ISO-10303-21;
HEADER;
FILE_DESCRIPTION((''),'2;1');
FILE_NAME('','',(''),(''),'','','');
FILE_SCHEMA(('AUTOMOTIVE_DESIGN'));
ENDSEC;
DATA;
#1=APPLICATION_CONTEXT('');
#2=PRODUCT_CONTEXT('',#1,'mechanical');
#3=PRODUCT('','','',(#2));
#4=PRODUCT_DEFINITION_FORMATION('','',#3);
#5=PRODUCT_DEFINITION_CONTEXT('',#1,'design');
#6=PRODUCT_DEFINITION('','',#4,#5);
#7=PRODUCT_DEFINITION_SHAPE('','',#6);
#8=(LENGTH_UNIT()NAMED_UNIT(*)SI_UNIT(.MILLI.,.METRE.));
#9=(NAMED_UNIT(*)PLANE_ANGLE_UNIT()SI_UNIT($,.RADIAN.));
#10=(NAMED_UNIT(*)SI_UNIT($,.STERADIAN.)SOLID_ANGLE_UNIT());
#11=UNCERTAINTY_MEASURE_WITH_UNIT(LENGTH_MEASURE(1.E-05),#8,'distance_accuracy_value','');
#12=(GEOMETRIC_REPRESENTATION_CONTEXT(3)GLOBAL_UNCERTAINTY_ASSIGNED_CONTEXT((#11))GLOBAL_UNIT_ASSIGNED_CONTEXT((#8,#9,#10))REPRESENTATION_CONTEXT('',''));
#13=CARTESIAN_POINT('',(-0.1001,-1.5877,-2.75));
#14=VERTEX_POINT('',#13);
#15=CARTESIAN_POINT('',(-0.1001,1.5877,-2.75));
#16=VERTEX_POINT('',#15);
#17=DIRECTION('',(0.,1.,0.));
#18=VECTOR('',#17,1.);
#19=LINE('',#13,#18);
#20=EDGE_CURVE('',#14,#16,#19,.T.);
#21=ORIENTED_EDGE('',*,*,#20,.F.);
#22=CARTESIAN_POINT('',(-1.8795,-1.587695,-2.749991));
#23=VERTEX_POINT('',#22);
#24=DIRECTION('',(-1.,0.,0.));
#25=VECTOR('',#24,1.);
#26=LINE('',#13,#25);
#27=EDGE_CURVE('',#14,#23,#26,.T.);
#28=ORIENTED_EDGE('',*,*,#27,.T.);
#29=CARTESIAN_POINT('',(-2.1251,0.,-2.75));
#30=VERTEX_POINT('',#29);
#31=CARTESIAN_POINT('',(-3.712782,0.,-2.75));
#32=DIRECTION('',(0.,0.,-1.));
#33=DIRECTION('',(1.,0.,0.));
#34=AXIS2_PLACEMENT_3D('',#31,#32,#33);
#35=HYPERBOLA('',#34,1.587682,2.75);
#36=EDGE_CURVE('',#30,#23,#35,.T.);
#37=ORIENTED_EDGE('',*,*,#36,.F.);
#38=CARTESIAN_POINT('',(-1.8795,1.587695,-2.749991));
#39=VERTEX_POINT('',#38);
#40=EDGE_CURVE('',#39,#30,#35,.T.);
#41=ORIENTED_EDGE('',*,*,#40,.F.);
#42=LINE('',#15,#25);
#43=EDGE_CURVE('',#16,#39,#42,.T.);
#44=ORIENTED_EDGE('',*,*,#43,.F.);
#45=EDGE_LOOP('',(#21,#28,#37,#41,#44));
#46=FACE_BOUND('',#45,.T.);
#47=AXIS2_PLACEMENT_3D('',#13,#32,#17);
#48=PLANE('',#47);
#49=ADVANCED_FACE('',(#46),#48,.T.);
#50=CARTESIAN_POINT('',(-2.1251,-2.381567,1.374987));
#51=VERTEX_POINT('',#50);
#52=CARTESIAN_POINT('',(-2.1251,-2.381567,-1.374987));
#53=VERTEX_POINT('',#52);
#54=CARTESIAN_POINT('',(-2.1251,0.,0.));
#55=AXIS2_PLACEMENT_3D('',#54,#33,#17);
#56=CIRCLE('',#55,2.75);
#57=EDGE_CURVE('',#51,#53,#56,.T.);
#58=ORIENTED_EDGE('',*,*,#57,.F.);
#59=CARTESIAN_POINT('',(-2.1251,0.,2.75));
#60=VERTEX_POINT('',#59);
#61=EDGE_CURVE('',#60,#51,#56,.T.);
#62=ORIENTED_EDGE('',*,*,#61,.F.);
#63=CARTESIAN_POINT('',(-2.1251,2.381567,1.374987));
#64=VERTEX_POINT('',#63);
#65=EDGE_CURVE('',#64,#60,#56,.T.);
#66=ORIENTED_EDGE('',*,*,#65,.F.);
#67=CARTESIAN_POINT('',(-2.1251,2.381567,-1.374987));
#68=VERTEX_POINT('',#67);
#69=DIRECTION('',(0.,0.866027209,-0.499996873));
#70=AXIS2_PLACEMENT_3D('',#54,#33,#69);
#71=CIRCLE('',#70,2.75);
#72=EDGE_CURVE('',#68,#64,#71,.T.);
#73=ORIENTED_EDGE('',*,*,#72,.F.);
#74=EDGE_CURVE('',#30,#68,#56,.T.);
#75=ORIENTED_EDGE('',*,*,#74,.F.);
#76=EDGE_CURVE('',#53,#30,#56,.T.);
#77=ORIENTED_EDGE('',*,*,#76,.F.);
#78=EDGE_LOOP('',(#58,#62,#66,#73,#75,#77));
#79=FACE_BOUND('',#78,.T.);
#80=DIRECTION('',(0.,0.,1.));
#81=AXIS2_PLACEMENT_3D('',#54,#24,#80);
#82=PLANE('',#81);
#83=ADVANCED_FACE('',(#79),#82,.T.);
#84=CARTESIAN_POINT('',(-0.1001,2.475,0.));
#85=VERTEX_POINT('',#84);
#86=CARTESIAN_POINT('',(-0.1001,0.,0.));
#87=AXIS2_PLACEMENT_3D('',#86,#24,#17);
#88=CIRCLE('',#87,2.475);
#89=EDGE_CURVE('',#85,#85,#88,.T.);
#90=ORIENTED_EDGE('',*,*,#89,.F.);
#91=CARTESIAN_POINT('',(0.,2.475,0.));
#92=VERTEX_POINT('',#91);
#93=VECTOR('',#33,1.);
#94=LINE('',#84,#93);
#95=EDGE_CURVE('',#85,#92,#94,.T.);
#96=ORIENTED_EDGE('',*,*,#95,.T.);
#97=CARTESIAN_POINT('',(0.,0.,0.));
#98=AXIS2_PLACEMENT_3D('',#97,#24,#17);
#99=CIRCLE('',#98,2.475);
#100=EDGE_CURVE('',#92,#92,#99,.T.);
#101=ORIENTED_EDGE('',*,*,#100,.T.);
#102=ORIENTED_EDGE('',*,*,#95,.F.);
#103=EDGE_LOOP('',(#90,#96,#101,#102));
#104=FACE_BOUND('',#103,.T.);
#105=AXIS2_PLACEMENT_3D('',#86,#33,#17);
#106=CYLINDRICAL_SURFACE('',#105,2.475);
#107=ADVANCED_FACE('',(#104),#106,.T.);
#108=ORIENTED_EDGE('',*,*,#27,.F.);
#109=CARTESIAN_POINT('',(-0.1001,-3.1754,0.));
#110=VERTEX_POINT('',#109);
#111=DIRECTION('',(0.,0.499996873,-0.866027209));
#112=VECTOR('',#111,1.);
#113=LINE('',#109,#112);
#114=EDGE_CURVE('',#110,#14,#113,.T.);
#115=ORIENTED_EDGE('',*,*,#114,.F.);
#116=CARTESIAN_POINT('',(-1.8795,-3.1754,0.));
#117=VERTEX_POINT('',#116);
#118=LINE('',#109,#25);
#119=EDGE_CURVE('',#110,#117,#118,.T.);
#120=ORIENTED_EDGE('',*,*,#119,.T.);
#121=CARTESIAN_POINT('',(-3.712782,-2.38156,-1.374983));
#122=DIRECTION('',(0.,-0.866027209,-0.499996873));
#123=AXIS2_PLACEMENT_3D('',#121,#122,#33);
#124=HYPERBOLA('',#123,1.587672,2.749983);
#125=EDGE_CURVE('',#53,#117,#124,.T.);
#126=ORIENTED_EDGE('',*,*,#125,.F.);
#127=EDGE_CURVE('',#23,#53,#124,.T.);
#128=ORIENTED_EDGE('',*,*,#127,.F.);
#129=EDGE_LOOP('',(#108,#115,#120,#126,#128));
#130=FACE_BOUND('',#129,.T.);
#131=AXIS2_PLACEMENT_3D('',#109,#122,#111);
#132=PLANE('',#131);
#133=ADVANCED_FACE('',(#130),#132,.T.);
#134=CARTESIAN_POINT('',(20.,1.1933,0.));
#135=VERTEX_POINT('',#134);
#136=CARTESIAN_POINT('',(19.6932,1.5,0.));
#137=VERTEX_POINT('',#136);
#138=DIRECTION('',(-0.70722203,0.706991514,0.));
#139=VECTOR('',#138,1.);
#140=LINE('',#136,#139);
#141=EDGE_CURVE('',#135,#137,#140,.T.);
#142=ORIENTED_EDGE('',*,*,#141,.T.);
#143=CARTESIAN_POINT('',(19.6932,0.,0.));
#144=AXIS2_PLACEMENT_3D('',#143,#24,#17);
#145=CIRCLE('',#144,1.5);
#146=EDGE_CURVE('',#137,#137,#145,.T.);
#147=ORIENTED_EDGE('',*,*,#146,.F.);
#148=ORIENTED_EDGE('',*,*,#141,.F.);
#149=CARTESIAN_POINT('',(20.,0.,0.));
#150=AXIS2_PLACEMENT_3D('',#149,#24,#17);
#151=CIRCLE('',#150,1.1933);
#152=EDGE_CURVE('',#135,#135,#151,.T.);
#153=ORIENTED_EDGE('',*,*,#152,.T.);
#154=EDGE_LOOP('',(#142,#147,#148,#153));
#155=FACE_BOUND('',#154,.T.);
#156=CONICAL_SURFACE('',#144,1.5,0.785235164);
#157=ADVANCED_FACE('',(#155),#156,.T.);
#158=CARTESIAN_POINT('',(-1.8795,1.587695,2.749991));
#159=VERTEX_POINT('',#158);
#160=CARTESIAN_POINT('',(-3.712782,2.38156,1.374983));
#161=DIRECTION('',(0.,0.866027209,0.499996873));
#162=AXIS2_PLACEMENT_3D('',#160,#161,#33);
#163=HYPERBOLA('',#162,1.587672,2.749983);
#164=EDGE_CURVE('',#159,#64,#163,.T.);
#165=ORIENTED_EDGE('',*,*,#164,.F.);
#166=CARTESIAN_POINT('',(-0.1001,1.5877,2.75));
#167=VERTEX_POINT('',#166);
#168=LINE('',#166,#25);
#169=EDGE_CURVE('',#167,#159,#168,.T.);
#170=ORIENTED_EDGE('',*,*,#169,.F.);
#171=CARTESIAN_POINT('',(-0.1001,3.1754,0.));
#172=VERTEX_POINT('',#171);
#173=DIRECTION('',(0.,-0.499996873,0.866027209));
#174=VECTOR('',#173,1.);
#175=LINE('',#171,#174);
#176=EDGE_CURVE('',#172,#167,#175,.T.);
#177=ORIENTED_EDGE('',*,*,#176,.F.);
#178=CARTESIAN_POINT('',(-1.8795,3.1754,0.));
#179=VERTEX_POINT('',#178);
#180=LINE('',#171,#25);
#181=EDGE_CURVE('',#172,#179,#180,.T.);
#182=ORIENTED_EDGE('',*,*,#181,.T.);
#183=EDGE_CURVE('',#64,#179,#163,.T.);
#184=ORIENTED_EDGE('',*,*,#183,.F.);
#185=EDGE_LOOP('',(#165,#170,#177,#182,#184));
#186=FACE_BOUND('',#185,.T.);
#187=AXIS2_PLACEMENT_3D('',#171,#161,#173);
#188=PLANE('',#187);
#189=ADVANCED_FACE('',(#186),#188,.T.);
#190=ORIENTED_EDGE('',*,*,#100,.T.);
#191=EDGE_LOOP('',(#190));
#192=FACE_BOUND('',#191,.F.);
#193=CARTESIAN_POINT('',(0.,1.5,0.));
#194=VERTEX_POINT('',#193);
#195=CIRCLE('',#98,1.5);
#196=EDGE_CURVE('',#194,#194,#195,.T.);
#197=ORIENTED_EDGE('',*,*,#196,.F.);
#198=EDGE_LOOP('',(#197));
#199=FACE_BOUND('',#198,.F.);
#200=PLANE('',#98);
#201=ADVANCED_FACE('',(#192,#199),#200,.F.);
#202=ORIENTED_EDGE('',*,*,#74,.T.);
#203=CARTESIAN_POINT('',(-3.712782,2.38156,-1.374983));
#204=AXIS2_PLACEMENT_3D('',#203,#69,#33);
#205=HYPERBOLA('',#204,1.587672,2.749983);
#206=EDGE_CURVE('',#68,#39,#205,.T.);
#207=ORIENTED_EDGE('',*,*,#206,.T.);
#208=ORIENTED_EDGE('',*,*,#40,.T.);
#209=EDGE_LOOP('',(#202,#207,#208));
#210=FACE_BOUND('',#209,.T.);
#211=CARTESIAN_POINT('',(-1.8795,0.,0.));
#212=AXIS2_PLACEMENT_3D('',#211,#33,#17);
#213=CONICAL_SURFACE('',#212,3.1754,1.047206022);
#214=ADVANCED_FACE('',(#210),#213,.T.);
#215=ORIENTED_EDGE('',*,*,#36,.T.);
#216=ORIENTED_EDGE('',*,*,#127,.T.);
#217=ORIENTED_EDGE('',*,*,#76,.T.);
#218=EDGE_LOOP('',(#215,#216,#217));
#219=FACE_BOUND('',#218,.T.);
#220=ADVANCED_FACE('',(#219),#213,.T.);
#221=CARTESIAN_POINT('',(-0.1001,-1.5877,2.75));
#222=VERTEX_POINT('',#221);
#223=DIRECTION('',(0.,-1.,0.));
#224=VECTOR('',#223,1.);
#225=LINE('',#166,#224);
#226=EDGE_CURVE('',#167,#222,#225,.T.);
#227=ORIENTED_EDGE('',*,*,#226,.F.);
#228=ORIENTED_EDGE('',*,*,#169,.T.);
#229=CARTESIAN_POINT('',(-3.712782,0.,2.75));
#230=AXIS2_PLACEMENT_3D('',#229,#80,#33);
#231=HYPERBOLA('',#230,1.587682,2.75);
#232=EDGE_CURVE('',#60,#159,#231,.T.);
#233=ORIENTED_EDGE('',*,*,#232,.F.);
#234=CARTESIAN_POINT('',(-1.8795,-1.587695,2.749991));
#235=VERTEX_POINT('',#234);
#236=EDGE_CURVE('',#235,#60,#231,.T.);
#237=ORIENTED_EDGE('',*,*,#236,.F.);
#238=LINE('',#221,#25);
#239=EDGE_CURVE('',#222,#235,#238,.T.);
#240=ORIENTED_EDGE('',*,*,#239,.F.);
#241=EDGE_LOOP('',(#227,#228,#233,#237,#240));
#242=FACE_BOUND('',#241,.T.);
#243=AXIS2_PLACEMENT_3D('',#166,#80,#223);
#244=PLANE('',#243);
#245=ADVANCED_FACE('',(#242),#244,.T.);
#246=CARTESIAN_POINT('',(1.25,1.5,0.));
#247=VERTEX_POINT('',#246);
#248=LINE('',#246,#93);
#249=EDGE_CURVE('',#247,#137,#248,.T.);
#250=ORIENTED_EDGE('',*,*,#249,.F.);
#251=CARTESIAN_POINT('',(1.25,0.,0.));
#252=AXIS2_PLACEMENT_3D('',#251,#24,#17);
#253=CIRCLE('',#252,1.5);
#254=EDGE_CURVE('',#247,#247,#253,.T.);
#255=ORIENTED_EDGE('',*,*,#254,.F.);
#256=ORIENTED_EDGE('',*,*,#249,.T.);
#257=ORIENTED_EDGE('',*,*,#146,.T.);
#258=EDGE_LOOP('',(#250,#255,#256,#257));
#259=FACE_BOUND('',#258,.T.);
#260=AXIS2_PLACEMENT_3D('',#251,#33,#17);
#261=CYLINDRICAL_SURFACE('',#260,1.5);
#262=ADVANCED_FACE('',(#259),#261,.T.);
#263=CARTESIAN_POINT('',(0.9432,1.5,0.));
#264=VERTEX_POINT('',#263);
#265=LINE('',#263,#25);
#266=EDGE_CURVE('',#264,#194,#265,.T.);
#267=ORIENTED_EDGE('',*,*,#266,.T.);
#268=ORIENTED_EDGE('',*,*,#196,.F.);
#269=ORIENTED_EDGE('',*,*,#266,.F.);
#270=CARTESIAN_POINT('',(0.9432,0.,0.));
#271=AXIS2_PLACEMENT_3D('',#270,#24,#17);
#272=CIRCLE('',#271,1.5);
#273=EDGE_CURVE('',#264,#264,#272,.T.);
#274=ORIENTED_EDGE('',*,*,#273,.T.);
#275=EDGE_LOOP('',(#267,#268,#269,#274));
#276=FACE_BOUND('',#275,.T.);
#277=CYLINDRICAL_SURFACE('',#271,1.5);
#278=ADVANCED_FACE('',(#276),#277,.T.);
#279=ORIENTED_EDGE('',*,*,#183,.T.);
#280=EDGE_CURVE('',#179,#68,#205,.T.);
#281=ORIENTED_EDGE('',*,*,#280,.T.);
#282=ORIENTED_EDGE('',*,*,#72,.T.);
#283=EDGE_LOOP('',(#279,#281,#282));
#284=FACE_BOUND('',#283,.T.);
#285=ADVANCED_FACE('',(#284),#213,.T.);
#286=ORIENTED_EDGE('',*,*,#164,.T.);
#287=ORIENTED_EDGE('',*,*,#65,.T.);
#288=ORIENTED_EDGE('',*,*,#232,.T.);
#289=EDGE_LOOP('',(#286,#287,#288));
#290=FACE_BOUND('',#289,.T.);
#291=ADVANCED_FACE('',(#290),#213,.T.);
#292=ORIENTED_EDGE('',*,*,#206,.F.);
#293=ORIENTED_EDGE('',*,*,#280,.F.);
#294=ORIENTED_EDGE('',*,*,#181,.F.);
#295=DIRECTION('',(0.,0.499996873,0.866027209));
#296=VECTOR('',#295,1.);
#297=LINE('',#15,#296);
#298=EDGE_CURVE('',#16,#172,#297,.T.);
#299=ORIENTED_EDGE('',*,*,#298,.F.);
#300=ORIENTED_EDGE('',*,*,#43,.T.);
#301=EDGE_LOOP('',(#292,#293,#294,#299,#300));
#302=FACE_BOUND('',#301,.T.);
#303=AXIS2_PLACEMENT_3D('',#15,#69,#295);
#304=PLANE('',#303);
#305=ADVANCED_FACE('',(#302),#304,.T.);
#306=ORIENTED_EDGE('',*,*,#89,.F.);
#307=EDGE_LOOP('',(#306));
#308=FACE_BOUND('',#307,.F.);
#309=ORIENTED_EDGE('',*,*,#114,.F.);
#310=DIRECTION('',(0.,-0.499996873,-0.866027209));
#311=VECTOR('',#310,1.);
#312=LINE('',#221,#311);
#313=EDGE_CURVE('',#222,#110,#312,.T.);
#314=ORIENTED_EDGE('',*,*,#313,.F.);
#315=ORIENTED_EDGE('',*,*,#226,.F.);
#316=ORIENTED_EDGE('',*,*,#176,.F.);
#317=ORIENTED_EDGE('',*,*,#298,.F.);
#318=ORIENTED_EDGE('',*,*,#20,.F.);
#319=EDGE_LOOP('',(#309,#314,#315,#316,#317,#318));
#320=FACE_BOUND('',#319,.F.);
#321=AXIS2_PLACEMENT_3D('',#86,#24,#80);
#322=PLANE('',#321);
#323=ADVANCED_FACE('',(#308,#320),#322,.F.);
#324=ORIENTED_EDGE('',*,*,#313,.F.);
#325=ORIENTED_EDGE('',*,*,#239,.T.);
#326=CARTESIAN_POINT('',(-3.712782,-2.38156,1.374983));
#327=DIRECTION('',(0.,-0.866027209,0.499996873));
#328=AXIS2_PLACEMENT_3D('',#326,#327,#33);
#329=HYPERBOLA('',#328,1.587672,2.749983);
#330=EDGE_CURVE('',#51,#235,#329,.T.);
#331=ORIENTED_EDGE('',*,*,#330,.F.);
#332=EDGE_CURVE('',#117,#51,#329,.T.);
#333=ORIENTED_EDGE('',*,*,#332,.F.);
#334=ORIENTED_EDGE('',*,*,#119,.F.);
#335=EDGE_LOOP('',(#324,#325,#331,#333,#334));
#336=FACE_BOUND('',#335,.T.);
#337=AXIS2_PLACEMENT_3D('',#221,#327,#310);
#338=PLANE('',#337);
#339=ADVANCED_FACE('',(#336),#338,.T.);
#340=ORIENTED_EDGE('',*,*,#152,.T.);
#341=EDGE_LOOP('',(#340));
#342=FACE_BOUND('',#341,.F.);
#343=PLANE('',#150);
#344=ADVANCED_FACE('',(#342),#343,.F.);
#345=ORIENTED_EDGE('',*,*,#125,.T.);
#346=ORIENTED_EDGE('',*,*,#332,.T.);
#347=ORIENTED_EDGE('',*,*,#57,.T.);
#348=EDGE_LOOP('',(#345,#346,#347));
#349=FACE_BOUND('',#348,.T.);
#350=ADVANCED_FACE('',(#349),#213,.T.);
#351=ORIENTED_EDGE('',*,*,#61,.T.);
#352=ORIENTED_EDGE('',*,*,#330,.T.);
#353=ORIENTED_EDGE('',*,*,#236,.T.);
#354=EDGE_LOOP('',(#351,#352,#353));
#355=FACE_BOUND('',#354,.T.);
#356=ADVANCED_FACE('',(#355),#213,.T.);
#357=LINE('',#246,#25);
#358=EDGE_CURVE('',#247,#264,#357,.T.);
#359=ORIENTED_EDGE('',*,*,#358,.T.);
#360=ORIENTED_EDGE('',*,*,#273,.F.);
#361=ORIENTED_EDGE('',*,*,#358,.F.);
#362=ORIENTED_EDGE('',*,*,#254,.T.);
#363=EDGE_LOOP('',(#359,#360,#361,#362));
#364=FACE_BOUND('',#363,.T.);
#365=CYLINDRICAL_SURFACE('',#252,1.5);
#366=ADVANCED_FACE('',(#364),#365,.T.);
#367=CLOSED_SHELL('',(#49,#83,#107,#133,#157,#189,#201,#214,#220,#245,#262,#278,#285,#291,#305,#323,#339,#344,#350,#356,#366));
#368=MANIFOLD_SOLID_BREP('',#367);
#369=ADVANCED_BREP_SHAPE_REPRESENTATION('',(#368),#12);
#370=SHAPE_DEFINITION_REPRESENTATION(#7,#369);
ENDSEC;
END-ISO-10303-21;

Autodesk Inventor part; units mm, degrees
ref_plane "YZ Plane" through (0, 0, 0) normal (1, 0, 0) x (0, 1, 0)
ref_plane "XZ Plane" through (0, 0, 0) normal (0, 1, 0) x (-1, 0, 0)
sketch "Sketch1" plane through (0, 0, 0) normal (0, 0, 1) x (1, 0, 0)
  line L0 (0, 2.475) -> (0, 1.5)
  line L1 (1.25, 1.5) -> (20, 1.5)
  line L2 (20, 1.5) -> (20, 0)
  line L3 (20, 0) -> (-0.1001, 0)
  line L4 (-4.1201, 0) -> (24.02, 0) projected
  line L5 (-0.1001, 0) -> (-0.1001, 2.475)
  line L6 (-0.1001, 2.475) -> (0, 2.475)
  line L7 (1.25, 1.5) -> (0.9432, 1.5)
  line L8 (0.9432, 1.5) -> (0, 1.5)
  line L9 (0, -0.495) -> (0, 2.97) projected
  dimension "d2" = 3
  dimension "d9" = 0.1001
  dimension "d10" = 4.95
  dimension "d13" = 0.3068
  dimension "d14" = 3
  dimension "d59" = 20
revolve "Body" add sketch "Sketch1" angle 360 about axis through (20, 0, 0) along (-1, 0, 0)
sketch "Sketch2" plane through (-0.1001, 0, 0) normal (-1, 0, 0) x (0, 0, 1)
  line L0 (0, 3.1754) -> (2.75, 1.5877)
  line L1 (2.75, 1.5877) -> (2.75, -1.5877)
  line L2 (2.75, -1.5877) -> (0, -3.1754)
  line L3 (0, -3.1754) -> (-2.75, -1.5877)
  line L4 (-2.75, -1.5877) -> (-2.75, 1.5877)
  line L5 (-2.75, 1.5877) -> (0, 3.1754)
  point P0 (0, 0)
  point P1 (0, 0)
  dimension "d11" = 5.5
extrude "Head" add sketch "Sketch2" along normal blind 2.025
sketch "Sketch4" plane through (0, 0, 0) normal (0, 0, 1) x (1, 0, 0)
  line L0 (-2.1251, 2.75) -> (-2.1251, 3.1754)
  line L1 (-2.1251, 3.1754) -> (-1.8795, 3.1754)
  line L2 (-1.8795, 3.1754) -> (-2.1251, 2.75)
  line L3 (-2.5301, 0) -> (0.3049, 0) projected
  line L4 (-0.1001, 3.1754) -> (-2.1251, 3.1754) projected
  line L5 (-2.1251, 1.5877) -> (-2.1251, 3.1754) projected
  dimension "d5" = 30
  dimension "d19" = 5.5
revolve "Chamfer1" cut sketch "Sketch4" angle 360 about axis through (-10, 0, 0) along (1, 0, 0)
thread "Thread" size "M3x0.5" class "6g" standard "ISO Metric profile" length 14
chamfer "Chamfer2" distance 0.3067 distance2 0.3068 1 edges at (20, -1.5, 0) measured on face at (20, -0.3888, -0.2119)
ref_plane "Work Plane1" through (1.525, 0, 0) normal (0, 0, 1) x (1, 0, 0)
equation "\"d11\" = SW"
equation "\"d3\" = KOH - SD"
equation "\"d5\" = ANG1"
equation "\"d19\" = SW0"
equation "\"d6\" = -0.5 * SPD + 0.5 * GD"
equation "\"d2\" = GD"
equation "\"d10\" = SD2"
equation "\"d14\" = BDM"
equation "\"GD\" = NND"
equation "\"BDM\" = NND"
equation "\"KOH\" = 2.125"
equation "\"GEL\" = 8.75"
equation "\"SW\" = 5.5"
equation "\"SW0\" = SW"
equation "\"SPD\" = NND - 1.2269 * PTC"
equation "\"SD2\" = 0.9 * SW"
equation "\"SD\" = 0.1"
equation "\"ANG1\" = 30deg"
equation "\"GAL\" = 0.61345 * PTC"
equation "\"GUL\" = 0.61345 * PTC"
equation "\"RR\" = 0.3"
equation "\"GD1\" = THREADDIA - 1.2269 * PTC"
equation "\"THREADDIA\" = 3"
equation "\"SDH\" = 5.08"
equation "\"SDHG\" = 1.25"
equation "\"TOA\" = 30deg"
equation "\"PTC\" = 0.5"
equation "\"NND\" = 3"
equation "\"E0\" = 1.155 * SW"
properties part number "M3 x 10 - Hex. Head Set Screw (MS)" material "Stainless Steel"
